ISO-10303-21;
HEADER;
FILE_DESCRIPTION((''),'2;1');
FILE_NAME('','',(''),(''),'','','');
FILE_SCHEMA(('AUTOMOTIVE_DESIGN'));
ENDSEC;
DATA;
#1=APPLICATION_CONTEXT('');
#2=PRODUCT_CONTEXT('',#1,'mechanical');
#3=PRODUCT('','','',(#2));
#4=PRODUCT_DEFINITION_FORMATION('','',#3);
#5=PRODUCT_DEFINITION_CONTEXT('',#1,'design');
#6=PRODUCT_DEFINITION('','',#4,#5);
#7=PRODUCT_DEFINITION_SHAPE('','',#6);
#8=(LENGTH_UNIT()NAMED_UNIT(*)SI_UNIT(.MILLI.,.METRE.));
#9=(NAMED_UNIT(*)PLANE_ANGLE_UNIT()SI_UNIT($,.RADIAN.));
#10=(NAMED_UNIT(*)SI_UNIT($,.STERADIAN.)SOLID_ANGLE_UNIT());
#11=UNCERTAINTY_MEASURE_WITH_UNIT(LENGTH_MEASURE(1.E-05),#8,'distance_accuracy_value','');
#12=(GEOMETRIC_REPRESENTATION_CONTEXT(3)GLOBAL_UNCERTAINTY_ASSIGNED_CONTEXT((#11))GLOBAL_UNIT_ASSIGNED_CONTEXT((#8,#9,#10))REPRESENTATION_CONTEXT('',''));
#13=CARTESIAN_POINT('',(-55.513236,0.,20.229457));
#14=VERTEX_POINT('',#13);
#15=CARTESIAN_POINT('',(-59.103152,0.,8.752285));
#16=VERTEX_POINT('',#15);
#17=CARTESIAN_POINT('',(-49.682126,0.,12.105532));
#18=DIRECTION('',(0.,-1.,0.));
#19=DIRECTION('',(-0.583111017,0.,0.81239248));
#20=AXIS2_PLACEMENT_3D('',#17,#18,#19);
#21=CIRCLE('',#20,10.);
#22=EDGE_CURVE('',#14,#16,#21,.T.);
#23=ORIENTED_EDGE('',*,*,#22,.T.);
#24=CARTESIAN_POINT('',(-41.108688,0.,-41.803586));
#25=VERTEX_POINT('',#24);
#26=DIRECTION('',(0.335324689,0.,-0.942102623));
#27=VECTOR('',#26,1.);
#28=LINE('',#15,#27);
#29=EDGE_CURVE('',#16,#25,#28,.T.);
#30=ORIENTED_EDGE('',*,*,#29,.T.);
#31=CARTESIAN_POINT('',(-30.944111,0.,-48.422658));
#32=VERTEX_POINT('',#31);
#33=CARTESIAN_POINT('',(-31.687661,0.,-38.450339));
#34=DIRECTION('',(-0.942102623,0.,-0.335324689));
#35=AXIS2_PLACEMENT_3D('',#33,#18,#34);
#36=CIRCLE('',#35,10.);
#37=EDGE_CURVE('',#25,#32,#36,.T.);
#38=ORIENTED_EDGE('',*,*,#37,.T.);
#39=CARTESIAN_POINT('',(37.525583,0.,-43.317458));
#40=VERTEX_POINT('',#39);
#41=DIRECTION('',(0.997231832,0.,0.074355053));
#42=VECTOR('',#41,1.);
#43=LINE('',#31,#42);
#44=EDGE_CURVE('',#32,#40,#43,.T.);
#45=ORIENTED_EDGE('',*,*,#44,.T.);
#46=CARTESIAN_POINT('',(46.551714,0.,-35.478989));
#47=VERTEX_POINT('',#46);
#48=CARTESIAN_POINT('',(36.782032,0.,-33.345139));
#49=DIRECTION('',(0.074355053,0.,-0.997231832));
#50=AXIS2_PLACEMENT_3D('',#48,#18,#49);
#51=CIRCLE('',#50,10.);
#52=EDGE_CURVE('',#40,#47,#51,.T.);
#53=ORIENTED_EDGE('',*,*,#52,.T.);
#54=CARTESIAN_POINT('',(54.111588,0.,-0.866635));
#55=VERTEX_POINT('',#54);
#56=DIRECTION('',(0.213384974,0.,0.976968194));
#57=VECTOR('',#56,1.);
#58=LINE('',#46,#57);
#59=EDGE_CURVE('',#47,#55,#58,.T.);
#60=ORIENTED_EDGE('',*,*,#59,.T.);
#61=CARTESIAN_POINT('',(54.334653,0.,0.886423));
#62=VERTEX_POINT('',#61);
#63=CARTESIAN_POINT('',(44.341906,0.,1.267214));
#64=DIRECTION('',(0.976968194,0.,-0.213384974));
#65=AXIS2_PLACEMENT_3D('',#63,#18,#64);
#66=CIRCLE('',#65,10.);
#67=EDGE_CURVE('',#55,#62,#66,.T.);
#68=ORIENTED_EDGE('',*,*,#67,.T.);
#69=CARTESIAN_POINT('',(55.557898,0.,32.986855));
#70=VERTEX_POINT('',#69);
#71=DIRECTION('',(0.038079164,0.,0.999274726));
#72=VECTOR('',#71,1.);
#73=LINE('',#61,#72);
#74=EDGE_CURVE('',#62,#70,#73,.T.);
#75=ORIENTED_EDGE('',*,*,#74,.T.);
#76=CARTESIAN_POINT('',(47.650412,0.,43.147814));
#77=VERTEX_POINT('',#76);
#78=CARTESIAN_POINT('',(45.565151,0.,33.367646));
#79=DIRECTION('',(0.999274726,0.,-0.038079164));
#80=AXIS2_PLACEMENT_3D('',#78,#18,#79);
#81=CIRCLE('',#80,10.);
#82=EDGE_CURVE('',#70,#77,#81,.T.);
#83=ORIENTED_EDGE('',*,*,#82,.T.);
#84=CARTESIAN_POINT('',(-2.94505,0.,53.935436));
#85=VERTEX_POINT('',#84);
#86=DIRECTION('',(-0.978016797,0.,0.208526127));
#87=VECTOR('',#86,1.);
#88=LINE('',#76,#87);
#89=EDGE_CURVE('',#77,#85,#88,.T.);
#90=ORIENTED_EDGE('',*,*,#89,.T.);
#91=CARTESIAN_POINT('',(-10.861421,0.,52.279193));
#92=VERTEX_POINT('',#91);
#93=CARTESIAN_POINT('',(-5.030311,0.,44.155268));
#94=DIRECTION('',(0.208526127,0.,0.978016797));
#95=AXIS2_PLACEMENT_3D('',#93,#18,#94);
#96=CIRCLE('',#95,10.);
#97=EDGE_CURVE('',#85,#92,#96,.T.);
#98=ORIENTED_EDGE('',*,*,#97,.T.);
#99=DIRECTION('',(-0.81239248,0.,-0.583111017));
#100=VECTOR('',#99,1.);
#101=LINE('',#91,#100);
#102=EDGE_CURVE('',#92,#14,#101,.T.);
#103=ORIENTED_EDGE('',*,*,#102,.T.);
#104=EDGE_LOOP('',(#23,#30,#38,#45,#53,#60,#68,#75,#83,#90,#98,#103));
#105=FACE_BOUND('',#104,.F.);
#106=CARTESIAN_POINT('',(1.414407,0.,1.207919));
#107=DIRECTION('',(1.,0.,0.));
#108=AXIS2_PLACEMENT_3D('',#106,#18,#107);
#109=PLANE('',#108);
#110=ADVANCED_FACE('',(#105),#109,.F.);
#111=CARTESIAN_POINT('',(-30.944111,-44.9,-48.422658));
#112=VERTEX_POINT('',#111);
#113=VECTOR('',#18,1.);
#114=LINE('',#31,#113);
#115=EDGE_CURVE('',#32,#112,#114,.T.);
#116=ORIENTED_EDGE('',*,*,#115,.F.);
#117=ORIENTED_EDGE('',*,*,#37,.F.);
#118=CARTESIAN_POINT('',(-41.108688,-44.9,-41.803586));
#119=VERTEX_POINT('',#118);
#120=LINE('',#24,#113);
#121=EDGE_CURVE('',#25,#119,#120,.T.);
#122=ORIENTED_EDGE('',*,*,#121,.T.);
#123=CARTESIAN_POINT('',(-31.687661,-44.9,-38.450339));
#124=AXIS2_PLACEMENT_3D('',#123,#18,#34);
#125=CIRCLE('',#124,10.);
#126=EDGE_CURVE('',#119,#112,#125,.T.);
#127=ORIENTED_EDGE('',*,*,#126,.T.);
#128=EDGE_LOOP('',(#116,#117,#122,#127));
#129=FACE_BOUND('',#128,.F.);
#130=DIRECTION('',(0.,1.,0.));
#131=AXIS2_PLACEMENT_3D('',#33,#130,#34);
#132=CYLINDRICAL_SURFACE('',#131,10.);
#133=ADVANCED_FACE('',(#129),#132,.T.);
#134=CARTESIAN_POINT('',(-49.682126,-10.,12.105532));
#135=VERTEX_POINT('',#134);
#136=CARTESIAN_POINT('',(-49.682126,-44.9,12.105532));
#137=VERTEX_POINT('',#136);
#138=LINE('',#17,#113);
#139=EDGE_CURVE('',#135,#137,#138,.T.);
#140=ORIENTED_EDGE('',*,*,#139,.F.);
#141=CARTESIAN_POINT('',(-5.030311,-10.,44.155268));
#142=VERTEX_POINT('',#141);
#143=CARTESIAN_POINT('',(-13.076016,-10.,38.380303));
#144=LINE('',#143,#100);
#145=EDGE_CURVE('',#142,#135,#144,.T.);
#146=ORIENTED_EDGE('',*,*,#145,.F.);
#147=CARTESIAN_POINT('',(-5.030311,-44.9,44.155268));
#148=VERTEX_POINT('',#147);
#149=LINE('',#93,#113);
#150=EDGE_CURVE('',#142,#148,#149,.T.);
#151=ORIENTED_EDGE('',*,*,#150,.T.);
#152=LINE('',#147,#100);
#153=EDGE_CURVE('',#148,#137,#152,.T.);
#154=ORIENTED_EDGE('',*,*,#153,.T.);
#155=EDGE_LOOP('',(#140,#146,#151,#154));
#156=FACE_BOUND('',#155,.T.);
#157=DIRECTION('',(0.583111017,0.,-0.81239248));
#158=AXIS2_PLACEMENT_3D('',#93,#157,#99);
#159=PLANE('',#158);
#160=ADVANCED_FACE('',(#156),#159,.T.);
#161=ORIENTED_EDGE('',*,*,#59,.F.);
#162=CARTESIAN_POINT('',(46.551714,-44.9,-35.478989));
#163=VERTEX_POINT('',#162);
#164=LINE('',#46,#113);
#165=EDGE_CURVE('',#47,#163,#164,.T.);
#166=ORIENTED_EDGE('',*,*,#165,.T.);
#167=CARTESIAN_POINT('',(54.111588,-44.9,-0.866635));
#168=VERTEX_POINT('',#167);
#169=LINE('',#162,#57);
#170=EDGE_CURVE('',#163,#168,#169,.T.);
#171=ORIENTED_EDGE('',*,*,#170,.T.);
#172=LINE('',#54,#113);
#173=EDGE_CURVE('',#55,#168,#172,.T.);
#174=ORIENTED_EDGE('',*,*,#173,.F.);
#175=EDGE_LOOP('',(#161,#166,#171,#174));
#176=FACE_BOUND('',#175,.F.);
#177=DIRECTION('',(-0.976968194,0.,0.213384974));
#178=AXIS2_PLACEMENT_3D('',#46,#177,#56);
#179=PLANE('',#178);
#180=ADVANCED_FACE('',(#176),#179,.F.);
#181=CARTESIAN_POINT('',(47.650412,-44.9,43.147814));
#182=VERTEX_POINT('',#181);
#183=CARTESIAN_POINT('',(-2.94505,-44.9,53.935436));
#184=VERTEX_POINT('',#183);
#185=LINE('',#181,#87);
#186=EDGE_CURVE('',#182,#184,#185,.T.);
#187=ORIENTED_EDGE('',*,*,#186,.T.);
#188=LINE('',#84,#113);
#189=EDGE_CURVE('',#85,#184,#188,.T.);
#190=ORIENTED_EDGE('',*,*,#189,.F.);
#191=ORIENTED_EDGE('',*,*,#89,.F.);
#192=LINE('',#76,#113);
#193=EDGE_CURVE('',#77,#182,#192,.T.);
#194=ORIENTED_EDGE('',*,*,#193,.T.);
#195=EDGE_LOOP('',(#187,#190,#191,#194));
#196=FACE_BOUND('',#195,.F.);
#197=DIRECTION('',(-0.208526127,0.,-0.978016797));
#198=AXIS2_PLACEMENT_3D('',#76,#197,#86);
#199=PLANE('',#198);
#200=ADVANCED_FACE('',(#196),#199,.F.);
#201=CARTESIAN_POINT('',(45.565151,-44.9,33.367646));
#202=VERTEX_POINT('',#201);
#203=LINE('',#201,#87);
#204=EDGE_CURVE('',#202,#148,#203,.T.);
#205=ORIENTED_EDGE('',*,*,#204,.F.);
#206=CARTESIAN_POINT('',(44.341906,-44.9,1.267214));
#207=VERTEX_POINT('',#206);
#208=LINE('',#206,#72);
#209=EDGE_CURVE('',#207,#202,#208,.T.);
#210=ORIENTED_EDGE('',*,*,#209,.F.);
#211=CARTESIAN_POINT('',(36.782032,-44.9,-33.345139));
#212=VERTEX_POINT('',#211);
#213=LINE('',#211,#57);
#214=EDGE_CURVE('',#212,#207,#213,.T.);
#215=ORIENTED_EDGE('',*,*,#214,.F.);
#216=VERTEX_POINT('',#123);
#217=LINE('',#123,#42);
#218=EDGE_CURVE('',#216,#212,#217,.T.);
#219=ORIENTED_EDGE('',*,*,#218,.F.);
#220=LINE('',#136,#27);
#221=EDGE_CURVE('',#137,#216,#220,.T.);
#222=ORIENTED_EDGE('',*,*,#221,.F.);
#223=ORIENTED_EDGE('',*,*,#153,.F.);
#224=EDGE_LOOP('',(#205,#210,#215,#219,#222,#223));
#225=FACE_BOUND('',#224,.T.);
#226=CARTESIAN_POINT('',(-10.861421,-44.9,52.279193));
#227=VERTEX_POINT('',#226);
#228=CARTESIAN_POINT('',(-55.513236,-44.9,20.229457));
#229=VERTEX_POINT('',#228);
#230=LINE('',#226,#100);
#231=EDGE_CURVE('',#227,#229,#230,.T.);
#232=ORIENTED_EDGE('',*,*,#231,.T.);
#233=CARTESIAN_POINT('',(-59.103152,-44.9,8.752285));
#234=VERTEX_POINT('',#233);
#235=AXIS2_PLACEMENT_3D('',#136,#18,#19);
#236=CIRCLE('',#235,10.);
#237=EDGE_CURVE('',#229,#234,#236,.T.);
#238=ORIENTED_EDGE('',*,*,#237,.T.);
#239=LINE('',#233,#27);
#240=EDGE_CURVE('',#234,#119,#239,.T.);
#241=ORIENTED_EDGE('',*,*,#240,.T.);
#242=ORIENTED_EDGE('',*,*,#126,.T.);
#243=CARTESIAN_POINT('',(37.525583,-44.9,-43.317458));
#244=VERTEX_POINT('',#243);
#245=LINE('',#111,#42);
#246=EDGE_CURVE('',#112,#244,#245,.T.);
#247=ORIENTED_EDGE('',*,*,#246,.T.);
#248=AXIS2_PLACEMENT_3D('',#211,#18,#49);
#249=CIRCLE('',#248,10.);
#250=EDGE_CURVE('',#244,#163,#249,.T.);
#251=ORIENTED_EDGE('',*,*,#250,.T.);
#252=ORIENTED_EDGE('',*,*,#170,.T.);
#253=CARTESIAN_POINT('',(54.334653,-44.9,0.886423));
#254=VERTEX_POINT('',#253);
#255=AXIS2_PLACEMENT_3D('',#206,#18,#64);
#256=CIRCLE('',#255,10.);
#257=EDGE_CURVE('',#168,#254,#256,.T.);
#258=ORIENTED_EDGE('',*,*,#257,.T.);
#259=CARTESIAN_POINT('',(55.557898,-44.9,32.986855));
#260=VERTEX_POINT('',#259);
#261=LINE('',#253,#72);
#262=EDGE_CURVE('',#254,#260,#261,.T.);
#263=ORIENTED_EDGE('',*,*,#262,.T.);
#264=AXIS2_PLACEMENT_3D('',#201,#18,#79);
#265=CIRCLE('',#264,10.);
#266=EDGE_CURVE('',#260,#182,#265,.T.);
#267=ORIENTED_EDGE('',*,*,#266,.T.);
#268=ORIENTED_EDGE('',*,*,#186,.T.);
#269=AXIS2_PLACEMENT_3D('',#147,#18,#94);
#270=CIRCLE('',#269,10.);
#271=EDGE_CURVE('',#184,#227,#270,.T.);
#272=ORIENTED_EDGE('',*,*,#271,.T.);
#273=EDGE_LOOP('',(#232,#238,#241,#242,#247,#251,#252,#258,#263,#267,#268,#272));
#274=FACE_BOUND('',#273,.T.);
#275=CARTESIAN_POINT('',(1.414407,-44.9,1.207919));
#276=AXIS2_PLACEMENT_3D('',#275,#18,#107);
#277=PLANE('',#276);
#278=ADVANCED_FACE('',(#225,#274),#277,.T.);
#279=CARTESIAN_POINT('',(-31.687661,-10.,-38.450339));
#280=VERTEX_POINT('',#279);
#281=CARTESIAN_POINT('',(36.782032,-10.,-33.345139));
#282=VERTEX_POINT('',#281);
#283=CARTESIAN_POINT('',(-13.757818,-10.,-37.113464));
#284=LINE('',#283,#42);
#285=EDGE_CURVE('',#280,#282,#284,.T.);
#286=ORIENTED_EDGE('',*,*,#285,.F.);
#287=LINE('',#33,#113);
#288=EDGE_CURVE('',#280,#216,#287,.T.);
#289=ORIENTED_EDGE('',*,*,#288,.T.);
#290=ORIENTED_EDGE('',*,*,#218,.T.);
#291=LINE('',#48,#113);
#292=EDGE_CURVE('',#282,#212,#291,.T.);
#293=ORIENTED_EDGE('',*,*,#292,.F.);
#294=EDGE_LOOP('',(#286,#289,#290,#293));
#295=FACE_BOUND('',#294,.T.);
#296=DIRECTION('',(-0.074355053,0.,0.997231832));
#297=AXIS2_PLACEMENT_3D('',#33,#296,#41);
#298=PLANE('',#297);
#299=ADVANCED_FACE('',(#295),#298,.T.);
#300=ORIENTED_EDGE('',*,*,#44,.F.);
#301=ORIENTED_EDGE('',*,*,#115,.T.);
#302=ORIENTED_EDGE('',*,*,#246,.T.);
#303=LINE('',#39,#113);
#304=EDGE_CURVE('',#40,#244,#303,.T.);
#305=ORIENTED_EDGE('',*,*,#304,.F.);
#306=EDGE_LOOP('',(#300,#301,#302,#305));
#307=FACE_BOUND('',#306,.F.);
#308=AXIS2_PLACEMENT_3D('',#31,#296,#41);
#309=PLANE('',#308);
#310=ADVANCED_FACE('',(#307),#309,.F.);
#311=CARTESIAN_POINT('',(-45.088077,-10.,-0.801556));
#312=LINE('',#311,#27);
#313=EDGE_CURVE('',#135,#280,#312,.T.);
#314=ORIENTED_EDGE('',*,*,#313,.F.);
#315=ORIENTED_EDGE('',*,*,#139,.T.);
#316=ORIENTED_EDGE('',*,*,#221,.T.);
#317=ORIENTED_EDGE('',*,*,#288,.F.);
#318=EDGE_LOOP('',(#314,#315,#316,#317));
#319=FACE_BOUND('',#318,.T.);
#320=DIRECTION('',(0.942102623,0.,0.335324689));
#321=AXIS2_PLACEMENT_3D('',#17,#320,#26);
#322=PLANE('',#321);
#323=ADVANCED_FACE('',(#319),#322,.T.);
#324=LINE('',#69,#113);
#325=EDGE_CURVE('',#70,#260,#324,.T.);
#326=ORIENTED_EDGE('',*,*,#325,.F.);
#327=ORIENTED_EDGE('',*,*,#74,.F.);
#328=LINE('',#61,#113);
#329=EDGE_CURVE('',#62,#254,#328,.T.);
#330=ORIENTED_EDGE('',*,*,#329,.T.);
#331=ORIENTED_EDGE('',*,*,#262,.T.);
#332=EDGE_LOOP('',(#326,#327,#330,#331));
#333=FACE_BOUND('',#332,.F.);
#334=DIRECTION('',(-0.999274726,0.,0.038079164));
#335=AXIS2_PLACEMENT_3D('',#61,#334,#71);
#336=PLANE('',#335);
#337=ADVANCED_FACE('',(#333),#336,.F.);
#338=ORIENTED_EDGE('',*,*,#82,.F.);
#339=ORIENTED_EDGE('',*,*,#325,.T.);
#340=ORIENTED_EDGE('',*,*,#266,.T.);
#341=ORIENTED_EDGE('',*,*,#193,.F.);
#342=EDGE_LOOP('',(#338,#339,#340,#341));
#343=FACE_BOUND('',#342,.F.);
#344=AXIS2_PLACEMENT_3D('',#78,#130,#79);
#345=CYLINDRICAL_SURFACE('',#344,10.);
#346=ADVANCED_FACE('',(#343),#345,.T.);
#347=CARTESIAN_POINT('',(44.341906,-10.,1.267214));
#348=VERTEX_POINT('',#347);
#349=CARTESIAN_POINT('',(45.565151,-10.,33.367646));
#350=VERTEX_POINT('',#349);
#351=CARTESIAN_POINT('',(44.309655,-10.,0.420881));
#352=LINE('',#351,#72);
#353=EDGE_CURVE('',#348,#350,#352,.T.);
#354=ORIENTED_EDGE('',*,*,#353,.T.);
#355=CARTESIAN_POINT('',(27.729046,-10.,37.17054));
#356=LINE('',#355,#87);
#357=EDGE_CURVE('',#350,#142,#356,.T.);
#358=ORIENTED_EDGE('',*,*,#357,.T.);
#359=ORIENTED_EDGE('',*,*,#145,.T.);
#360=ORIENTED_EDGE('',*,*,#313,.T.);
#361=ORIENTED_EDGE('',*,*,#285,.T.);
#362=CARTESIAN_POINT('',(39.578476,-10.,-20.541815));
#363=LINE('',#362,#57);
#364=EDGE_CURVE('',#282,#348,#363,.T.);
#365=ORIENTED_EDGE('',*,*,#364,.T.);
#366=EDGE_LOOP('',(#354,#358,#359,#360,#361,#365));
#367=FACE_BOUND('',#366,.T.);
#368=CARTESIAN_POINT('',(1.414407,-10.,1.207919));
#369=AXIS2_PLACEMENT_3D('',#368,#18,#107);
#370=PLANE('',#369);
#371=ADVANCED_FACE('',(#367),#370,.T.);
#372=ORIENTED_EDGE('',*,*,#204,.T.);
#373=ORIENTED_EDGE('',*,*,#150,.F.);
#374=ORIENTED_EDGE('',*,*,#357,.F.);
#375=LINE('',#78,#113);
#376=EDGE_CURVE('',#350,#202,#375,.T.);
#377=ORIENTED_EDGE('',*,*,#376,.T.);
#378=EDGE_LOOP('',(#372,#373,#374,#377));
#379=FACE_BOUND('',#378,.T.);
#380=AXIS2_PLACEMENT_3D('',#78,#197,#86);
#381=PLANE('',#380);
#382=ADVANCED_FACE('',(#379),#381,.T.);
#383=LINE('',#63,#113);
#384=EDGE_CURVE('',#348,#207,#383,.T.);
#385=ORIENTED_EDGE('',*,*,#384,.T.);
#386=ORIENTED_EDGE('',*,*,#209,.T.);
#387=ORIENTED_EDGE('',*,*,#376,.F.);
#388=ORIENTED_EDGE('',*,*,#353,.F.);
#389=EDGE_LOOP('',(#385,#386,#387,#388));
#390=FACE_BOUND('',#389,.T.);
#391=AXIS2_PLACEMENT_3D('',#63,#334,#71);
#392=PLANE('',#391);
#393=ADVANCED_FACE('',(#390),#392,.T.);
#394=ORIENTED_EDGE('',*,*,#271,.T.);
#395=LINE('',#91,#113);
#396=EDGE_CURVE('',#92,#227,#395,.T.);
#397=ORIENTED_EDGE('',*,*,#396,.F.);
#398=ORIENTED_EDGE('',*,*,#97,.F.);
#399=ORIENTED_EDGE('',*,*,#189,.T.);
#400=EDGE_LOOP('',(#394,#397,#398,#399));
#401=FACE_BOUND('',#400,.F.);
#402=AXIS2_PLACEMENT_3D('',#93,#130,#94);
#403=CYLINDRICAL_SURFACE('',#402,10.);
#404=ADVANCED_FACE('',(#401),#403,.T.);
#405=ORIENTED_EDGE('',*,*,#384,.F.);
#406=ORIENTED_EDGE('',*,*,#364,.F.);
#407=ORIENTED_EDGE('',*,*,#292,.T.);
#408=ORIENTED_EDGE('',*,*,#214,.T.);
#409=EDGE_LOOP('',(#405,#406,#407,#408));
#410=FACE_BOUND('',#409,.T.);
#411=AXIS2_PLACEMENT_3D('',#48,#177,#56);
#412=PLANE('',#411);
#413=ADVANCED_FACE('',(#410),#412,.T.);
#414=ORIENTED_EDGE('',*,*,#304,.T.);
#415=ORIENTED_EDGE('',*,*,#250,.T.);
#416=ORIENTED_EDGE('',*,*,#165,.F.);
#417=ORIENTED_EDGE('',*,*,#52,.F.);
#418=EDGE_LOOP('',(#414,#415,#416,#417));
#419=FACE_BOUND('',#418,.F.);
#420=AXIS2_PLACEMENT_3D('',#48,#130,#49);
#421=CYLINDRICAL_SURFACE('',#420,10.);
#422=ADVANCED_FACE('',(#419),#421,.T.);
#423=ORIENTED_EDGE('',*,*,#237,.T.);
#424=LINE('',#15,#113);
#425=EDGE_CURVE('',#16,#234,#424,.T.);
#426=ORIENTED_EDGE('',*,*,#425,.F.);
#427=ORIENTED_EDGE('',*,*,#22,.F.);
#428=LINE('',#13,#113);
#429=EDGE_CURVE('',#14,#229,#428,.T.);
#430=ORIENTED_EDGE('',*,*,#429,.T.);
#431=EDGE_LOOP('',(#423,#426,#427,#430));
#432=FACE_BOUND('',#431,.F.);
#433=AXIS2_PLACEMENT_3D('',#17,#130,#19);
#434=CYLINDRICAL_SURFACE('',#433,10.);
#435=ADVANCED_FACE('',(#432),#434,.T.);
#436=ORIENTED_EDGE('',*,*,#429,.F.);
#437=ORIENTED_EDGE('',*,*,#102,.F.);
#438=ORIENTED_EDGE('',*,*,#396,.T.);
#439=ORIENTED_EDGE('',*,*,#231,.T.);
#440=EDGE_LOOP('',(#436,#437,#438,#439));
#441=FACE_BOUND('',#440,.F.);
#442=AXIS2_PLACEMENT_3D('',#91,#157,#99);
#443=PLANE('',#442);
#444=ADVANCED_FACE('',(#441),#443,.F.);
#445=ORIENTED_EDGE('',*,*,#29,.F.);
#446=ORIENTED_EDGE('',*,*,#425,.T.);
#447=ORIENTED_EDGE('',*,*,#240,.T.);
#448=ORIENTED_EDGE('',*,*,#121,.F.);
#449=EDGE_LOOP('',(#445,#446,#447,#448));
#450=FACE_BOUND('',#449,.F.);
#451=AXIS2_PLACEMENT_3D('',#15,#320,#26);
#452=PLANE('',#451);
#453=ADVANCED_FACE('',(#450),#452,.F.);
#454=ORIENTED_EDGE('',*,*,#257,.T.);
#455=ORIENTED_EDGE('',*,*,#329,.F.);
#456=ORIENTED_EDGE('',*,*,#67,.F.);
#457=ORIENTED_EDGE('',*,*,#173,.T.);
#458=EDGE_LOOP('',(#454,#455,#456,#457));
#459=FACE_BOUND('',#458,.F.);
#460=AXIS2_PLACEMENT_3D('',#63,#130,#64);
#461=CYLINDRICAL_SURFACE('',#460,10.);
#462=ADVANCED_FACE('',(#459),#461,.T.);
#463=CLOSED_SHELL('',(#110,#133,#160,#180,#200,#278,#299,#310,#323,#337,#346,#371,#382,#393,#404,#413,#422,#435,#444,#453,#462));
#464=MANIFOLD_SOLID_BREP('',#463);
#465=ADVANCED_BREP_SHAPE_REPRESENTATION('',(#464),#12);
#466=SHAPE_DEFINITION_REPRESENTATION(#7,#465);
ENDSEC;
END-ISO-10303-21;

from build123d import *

# Parameters (mm, degrees)
F1_DEPTH = 44.9
F2_T     = 10


# Not quite as in the source:
# - a shell that OpenCascade refuses in one call is made with other operations: the cavity is built on its own and cut out


with BuildPart() as f1:
    # F0 (on Front) → F1 (new body)
    with BuildSketch(Plane.XZ):
        with BuildLine():
            Line((-10.8614214341, 52.2791932931), (-55.5132357346, 20.2294568531))
            ThreePointArc((-55.5132357346, 20.2294568531), (-59.2261437786, 15.0907818347), (-59.1031517936, 8.7522851628))
            Line((-59.1031517936, 8.7522851628), (-41.1086877204, -41.8035860786))
            ThreePointArc((-41.1086877204, -41.8035860786), (-37.1445537144, -46.8302155121), (-30.9441109574, -48.4226575039))
            Line((-30.9441109574, -48.4226575039), (37.5255827113, -43.3174577507))
            ThreePointArc((37.5255827113, -43.3174577507), (43.3388920745, -40.8954764028), (46.5517141249, -35.4789891764))
            Line((46.5517141249, -35.4789891764), (54.1115878941, -0.8666353692))
            ThreePointArc((54.1115878941, -0.8666353692), (54.2619213312, 0.0049565354), (54.334653207, 0.886422737))
            Line((54.334653207, 0.886422737), (55.5578979933, 32.9868546181))
            ThreePointArc((55.5578979933, 32.9868546181), (53.4569722953, 39.5092382704), (47.6504120091, 43.1478142196))
            Line((47.6504120091, 43.1478142196), (-2.9450499877, 53.9354364594))
            ThreePointArc((-2.9450499877, 53.9354364594), (-7.0781470335, 53.9433412691), (-10.8614214341, 52.2791932931))
        make_face()
    extrude(amount=F1_DEPTH)

    # F2: shell of thickness 10, made by hand


with BuildPart() as f2_core1:
    # F2_t2: copy of F1
    add(f1.part)

    # the walls: a layer under each face that stays
    f2_faces = [f2_core1.faces().sort_by_distance(p)[0] for p in [
        (54.9462756001, -22.45, 16.9366386775),
        (22.3526810107, -22.45, 48.5416253395),
        (-33.1873285843, -22.45, 36.2543250731),
        (-50.105919757, -22.45, -16.5256504579),
        (3.2907358769, -22.45, -45.8700576273),
        (50.3316510095, -22.45, -18.1728122728),
        (-2.0584874118, 0, 2.8524646536),
    ]]
    thicken(f2_faces, amount=-F2_T, mode=Mode.SUBTRACT)


with BuildPart() as f1_1:
    add(f1.part)

    # what is left inside the walls is the cavity
    f2_cavity = [f2_core1.part.solids().sort_by_distance(p)[0] for p in [
        (-2.058487, -10.1, -10.915137),
    ]]
    add(f2_cavity, mode=Mode.SUBTRACT)


solid = f1_1.part
